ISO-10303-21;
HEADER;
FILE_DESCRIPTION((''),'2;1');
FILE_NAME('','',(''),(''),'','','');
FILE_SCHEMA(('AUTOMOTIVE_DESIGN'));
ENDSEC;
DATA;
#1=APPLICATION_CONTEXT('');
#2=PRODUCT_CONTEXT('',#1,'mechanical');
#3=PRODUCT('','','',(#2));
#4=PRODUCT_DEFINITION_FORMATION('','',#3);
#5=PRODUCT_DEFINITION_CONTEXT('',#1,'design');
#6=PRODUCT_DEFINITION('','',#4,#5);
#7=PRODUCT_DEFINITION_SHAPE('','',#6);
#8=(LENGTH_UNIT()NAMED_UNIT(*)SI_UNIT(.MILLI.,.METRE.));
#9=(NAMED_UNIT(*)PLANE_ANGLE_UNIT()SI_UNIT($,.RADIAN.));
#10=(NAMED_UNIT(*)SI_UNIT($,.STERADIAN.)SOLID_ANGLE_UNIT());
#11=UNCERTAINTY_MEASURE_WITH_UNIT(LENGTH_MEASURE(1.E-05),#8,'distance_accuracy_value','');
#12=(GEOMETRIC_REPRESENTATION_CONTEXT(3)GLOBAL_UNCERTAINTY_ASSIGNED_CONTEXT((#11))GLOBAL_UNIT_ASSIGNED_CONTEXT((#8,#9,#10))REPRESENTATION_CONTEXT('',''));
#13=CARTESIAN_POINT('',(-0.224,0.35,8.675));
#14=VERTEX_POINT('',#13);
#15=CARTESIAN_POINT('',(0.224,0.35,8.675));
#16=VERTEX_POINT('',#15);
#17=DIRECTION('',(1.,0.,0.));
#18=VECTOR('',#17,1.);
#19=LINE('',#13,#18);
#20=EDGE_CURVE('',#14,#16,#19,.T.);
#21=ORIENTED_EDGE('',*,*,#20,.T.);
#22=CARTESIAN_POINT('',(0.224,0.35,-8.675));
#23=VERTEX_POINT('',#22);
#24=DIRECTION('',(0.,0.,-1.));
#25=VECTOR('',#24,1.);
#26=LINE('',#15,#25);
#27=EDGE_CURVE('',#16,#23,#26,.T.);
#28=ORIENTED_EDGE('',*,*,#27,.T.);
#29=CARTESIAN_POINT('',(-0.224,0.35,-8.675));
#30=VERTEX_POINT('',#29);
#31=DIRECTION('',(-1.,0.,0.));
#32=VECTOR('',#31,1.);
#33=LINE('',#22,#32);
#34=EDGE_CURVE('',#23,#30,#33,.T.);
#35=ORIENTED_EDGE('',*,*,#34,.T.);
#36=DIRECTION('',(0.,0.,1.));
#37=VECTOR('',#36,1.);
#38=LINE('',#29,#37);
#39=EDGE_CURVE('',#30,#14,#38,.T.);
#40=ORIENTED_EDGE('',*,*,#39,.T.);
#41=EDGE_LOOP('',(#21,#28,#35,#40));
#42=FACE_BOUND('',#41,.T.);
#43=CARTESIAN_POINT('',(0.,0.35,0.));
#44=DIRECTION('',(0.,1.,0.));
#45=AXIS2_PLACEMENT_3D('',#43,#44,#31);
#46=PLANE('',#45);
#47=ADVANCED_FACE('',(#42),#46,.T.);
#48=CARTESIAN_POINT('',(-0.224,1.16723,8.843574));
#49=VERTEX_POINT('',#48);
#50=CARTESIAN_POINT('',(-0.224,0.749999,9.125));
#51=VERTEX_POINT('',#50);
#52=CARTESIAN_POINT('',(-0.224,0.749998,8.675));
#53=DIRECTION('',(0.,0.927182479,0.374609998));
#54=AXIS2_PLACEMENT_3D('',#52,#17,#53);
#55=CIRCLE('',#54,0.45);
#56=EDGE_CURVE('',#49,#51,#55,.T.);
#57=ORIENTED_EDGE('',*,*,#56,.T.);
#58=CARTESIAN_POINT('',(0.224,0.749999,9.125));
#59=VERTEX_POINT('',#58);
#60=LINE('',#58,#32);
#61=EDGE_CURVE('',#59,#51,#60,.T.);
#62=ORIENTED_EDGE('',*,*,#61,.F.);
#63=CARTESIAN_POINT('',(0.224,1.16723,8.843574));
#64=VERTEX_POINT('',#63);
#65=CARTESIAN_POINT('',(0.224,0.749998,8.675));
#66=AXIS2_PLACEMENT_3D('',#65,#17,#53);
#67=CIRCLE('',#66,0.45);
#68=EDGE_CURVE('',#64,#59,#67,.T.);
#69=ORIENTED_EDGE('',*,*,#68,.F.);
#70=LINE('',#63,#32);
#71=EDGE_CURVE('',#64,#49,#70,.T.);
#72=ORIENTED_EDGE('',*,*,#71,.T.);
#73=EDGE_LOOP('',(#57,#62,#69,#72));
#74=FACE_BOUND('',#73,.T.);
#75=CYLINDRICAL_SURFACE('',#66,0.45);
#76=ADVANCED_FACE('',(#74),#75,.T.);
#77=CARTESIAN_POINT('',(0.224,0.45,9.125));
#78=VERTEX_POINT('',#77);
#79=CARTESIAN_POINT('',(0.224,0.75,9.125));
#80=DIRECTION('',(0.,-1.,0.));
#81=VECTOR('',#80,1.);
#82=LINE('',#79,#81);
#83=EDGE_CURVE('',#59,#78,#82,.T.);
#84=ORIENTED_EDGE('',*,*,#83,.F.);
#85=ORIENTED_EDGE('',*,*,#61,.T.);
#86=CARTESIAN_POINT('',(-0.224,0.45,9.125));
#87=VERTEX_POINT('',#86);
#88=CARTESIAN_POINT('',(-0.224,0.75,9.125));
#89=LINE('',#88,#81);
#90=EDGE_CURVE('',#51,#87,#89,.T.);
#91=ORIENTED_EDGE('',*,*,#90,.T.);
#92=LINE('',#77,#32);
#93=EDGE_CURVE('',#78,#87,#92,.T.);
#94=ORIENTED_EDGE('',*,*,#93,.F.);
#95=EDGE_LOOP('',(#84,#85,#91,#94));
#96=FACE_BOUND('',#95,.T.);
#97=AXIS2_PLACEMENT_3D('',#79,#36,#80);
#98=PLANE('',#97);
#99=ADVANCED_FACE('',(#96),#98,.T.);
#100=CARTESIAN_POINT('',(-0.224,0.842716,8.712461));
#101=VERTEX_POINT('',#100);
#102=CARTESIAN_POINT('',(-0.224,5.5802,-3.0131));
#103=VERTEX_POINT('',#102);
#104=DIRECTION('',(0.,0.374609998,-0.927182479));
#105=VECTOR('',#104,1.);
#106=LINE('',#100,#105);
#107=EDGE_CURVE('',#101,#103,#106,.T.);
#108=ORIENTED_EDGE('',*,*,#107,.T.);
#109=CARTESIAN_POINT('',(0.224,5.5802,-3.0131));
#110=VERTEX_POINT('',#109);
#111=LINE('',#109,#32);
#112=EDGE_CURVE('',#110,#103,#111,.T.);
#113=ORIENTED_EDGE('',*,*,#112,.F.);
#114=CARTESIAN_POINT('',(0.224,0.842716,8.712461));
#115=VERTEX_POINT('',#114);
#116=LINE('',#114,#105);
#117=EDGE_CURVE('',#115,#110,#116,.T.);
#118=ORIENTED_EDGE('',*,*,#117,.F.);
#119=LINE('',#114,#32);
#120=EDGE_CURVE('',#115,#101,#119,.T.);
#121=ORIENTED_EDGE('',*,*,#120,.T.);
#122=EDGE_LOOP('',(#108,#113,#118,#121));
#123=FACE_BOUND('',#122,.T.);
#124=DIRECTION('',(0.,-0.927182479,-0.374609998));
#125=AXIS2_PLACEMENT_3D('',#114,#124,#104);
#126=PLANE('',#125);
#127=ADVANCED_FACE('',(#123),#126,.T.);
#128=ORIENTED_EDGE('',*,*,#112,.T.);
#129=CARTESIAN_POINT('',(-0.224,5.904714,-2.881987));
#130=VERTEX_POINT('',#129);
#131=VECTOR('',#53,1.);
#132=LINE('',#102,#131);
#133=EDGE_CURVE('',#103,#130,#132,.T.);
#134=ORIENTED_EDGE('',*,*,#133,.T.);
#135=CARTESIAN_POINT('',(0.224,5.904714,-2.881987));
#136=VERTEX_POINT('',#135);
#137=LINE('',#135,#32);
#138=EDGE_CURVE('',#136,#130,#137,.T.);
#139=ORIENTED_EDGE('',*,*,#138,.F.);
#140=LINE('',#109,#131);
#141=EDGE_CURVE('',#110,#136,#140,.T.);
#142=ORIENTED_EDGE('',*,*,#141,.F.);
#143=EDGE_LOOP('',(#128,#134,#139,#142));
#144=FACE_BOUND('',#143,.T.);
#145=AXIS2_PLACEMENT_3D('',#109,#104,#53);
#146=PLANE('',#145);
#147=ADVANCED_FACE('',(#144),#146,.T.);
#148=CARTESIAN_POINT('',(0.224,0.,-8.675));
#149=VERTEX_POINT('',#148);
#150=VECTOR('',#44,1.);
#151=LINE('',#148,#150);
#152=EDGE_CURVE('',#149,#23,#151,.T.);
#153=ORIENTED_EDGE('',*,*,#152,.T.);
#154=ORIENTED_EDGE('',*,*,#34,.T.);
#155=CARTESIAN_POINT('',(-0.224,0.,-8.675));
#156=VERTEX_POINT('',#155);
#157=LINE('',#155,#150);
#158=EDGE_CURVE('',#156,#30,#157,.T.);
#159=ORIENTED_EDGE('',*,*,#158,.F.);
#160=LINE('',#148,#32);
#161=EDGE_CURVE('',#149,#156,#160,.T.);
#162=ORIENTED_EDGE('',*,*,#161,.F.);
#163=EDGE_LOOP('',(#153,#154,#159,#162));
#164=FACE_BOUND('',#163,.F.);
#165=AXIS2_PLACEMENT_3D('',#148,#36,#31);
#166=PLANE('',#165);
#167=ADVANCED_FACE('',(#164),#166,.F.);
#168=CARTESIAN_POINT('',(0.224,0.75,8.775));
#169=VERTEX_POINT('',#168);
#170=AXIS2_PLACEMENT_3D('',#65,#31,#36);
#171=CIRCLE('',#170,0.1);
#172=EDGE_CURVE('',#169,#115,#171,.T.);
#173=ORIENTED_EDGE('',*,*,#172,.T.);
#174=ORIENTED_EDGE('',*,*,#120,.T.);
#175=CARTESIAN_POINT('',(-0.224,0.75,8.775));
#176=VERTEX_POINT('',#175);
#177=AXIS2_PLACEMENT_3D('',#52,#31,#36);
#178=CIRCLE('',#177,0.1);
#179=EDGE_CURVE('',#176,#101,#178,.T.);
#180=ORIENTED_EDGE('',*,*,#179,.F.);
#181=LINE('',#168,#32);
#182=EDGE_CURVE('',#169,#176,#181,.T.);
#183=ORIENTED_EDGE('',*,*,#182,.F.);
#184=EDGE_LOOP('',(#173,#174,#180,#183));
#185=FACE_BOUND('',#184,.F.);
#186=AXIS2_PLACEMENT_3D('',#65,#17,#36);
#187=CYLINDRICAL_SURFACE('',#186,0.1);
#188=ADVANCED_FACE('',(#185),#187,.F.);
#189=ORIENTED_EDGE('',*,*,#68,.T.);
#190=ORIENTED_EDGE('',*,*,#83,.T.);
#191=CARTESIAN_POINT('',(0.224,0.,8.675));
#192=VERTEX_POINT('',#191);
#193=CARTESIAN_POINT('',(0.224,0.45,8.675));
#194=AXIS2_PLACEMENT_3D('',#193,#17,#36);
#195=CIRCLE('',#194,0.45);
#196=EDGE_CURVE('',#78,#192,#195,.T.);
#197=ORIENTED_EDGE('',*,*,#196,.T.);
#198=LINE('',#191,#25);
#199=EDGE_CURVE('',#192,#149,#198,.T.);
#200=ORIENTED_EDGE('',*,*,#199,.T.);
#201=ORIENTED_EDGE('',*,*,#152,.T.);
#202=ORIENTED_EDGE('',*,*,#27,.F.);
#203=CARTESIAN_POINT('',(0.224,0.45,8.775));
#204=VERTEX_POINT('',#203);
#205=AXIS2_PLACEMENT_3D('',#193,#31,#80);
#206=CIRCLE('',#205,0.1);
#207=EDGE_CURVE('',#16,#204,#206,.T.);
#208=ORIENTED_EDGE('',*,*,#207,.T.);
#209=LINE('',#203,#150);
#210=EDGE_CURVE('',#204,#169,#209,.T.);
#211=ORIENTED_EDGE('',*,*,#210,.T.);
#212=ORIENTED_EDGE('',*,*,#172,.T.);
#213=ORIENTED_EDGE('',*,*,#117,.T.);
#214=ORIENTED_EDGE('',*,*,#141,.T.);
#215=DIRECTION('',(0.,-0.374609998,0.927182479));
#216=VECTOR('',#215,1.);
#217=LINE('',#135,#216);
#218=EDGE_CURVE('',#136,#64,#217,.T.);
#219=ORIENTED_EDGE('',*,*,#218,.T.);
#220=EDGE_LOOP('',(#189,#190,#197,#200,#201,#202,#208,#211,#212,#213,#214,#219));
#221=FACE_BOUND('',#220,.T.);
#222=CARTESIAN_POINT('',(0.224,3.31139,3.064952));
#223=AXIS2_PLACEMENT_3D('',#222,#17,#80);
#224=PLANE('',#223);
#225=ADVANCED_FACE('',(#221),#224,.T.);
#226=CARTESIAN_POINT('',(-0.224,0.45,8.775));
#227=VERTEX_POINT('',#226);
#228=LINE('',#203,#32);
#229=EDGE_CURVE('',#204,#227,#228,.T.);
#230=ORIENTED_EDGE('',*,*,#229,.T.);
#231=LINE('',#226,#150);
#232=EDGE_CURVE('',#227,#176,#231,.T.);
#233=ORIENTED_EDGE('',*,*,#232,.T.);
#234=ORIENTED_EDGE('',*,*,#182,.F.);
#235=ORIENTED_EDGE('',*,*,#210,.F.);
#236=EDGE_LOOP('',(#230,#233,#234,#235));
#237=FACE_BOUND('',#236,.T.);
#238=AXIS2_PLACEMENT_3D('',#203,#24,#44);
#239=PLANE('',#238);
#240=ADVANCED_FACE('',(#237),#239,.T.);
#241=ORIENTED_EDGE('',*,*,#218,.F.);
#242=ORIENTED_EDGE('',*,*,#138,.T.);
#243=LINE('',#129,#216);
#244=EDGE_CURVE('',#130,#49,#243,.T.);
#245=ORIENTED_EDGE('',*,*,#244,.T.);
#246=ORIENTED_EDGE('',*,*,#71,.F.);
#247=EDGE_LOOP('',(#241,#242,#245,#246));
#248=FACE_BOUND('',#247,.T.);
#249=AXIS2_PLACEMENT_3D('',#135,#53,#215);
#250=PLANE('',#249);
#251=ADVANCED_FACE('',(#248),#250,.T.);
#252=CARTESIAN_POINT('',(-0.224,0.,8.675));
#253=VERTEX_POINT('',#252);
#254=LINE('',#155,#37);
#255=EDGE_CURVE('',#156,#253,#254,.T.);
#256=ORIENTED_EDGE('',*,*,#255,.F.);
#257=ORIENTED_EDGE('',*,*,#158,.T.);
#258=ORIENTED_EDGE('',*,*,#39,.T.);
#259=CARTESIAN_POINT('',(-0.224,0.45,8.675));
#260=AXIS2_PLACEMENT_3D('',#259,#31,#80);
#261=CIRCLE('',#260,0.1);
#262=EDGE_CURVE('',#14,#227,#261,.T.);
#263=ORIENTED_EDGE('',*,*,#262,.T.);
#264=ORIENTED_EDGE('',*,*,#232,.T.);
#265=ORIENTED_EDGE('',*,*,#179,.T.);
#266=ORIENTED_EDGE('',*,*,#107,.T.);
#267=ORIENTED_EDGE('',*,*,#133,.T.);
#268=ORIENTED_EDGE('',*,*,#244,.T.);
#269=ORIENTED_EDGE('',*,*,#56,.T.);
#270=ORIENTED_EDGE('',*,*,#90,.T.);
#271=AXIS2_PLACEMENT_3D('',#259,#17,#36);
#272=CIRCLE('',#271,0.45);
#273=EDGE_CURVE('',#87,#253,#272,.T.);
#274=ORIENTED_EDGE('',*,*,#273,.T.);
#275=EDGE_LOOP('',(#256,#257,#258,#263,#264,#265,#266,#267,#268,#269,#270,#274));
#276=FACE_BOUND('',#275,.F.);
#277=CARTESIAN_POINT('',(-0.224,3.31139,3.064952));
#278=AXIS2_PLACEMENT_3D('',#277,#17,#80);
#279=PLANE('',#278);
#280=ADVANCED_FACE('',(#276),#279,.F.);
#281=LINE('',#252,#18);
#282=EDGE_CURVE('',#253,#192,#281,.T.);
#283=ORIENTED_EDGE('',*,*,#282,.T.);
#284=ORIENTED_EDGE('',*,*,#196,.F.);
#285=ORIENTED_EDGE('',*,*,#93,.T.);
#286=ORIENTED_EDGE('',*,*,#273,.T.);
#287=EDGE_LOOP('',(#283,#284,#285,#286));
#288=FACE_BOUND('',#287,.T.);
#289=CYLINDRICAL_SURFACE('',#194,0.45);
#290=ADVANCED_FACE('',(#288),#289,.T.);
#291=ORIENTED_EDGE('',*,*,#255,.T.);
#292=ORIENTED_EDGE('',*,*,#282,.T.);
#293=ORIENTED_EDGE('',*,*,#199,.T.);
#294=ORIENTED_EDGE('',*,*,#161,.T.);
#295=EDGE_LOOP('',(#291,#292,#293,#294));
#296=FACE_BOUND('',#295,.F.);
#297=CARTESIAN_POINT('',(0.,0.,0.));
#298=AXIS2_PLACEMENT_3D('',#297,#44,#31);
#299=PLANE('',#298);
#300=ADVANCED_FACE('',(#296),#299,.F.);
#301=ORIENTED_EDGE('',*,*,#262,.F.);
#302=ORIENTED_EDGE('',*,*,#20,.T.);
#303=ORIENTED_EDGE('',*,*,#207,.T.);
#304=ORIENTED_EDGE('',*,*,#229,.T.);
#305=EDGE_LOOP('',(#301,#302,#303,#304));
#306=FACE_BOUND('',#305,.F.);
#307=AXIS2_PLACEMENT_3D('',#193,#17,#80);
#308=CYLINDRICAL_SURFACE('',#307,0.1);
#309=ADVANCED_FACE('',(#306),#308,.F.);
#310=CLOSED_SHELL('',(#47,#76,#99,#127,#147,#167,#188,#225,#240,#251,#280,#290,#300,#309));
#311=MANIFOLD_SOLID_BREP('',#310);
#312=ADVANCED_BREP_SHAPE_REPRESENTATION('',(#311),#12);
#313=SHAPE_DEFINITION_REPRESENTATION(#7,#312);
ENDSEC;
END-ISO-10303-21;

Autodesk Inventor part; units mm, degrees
ref_plane "YZ Plane" through (0, 0, 0) normal (1, 0, 0) x (0, 1, 0)
ref_plane "XZ Plane" through (0, 0, 0) normal (0, 1, 0) x (-1, 0, 0)
ref_plane "XY Plane" through (0, 0, 0) normal (0, 0, 1) x (1, 0, 0)
sketch "Sketch1" plane through (0, 0, 0) normal (0, 1, 0) x (-1, 0, 0)
  line L0 (0.224, 8.675) -> (-0.224, 8.675)
  line L1 (-0.224, 8.675) -> (-0.224, -8.675)
  line L2 (-0.224, -8.675) -> (0.224, -8.675)
  line L3 (0.224, -8.675) -> (0.224, 8.675)
  line L4 (0.224, 8.675) -> (-0.224, -8.675) construction
  line L5 (-0.224, 8.675) -> (0.224, -8.675) construction
  point P0 (0, 0)
  dimension "d0" = 0.448
  dimension "d1" = 17.35
extrude "Plate1" add sketch "Sketch1" along normal blind 0.35
sketch "Sketch2" plane through (0.224, 0.45, 8.775) normal (0, 0, 1) x (1, 0, 0)
  line L0 (-0.448, 0) -> (0, 0)
  line L1 (0, 0) -> (0, 0.3)
  line L2 (0, 0.3) -> (-0.448, 0.3)
  line L3 (-0.448, 0.3) -> (-0.448, 0)
edge flange "Flange1" height 0.75 angle 90 thickness 0.35 bend radius 0.1 thickness toward (0, 0, 1) relief tear relief width 0.35 relief depth 0.175 edges at (0, 0.35, 8.675) wall of the first edge with corners at (-0.224, 0.45, 8.775) (0.224, 0.45, 8.775) (0.224, 0.75, 8.775) (-0.224, 0.75, 8.775)
bend "Bend1"
corner "Corner1"
sketch "Sketch3" plane through (0.224, 0.8427, 8.7125) normal (0, 0.9271839, 0.3746066) x (-1, 0, 0)
  line L0 (0.448, 0) -> (0, 0)
  line L1 (0, 0) -> (0, -12.6465)
  line L2 (0, -12.6465) -> (0.448, -12.6465)
  line L3 (0.448, -12.6465) -> (0.448, 0)
edge flange "Flange2" height 12.95 angle 68 thickness 0.35 bend radius 0.1 thickness toward (0, 0.9271839, 0.3746066) relief tear relief width 0.35 relief depth 0.175 edges at (0, 0.75, 8.775) wall of the first edge with corners at (-0.224, 0.8427, 8.7125) (0.224, 0.8427, 8.7125) (0.224, 5.5802, -3.0131) (-0.224, 5.5802, -3.0131)
bend "Bend2"
corner "Corner2"
equation "\"d2\" = Thickness"
equation "\"d3\" = BendReliefWidth"
equation "\"d4\" = BendReliefDepth"
equation "\"d5\" = MinimumRemnant"
equation "\"d6\" = TransitionRadius"
equation "\"d9\" = BendRadius"
equation "\"d10\" = CornerReliefSize"
equation "\"d11\" = GapSize"
equation "\"d12\" = JacobiRadiusSize"
equation "\"d13\" = BendReliefWidth"
equation "\"d14\" = BendReliefDepth"
equation "\"d15\" = MinimumRemnant"
equation "\"d16\" = TransitionRadius"
equation "\"d19\" = BendRadius"
equation "\"d20\" = CornerReliefSize"
equation "\"d21\" = GapSize"
equation "\"d22\" = JacobiRadiusSize"
equation "\"BendReliefWidth\" = Thickness"
equation "\"BendReliefDepth\" = 0.5 * Thickness"
equation "\"CornerReliefSize\" = 4 * Thickness"
equation "\"MinimumRemnant\" = 2 * Thickness"
equation "\"TransitionRadius\" = BendRadius"
equation "\"JacobiRadiusSize\" = BendRadius"
equation "\"GapSize\" = Thickness"
equation "\"Thickness\" = 0.35"
equation "\"BendRadius\" = 0.1"
properties part number "RJ45 Odd Pins" material "Nickel-Copper Alloy 400"
